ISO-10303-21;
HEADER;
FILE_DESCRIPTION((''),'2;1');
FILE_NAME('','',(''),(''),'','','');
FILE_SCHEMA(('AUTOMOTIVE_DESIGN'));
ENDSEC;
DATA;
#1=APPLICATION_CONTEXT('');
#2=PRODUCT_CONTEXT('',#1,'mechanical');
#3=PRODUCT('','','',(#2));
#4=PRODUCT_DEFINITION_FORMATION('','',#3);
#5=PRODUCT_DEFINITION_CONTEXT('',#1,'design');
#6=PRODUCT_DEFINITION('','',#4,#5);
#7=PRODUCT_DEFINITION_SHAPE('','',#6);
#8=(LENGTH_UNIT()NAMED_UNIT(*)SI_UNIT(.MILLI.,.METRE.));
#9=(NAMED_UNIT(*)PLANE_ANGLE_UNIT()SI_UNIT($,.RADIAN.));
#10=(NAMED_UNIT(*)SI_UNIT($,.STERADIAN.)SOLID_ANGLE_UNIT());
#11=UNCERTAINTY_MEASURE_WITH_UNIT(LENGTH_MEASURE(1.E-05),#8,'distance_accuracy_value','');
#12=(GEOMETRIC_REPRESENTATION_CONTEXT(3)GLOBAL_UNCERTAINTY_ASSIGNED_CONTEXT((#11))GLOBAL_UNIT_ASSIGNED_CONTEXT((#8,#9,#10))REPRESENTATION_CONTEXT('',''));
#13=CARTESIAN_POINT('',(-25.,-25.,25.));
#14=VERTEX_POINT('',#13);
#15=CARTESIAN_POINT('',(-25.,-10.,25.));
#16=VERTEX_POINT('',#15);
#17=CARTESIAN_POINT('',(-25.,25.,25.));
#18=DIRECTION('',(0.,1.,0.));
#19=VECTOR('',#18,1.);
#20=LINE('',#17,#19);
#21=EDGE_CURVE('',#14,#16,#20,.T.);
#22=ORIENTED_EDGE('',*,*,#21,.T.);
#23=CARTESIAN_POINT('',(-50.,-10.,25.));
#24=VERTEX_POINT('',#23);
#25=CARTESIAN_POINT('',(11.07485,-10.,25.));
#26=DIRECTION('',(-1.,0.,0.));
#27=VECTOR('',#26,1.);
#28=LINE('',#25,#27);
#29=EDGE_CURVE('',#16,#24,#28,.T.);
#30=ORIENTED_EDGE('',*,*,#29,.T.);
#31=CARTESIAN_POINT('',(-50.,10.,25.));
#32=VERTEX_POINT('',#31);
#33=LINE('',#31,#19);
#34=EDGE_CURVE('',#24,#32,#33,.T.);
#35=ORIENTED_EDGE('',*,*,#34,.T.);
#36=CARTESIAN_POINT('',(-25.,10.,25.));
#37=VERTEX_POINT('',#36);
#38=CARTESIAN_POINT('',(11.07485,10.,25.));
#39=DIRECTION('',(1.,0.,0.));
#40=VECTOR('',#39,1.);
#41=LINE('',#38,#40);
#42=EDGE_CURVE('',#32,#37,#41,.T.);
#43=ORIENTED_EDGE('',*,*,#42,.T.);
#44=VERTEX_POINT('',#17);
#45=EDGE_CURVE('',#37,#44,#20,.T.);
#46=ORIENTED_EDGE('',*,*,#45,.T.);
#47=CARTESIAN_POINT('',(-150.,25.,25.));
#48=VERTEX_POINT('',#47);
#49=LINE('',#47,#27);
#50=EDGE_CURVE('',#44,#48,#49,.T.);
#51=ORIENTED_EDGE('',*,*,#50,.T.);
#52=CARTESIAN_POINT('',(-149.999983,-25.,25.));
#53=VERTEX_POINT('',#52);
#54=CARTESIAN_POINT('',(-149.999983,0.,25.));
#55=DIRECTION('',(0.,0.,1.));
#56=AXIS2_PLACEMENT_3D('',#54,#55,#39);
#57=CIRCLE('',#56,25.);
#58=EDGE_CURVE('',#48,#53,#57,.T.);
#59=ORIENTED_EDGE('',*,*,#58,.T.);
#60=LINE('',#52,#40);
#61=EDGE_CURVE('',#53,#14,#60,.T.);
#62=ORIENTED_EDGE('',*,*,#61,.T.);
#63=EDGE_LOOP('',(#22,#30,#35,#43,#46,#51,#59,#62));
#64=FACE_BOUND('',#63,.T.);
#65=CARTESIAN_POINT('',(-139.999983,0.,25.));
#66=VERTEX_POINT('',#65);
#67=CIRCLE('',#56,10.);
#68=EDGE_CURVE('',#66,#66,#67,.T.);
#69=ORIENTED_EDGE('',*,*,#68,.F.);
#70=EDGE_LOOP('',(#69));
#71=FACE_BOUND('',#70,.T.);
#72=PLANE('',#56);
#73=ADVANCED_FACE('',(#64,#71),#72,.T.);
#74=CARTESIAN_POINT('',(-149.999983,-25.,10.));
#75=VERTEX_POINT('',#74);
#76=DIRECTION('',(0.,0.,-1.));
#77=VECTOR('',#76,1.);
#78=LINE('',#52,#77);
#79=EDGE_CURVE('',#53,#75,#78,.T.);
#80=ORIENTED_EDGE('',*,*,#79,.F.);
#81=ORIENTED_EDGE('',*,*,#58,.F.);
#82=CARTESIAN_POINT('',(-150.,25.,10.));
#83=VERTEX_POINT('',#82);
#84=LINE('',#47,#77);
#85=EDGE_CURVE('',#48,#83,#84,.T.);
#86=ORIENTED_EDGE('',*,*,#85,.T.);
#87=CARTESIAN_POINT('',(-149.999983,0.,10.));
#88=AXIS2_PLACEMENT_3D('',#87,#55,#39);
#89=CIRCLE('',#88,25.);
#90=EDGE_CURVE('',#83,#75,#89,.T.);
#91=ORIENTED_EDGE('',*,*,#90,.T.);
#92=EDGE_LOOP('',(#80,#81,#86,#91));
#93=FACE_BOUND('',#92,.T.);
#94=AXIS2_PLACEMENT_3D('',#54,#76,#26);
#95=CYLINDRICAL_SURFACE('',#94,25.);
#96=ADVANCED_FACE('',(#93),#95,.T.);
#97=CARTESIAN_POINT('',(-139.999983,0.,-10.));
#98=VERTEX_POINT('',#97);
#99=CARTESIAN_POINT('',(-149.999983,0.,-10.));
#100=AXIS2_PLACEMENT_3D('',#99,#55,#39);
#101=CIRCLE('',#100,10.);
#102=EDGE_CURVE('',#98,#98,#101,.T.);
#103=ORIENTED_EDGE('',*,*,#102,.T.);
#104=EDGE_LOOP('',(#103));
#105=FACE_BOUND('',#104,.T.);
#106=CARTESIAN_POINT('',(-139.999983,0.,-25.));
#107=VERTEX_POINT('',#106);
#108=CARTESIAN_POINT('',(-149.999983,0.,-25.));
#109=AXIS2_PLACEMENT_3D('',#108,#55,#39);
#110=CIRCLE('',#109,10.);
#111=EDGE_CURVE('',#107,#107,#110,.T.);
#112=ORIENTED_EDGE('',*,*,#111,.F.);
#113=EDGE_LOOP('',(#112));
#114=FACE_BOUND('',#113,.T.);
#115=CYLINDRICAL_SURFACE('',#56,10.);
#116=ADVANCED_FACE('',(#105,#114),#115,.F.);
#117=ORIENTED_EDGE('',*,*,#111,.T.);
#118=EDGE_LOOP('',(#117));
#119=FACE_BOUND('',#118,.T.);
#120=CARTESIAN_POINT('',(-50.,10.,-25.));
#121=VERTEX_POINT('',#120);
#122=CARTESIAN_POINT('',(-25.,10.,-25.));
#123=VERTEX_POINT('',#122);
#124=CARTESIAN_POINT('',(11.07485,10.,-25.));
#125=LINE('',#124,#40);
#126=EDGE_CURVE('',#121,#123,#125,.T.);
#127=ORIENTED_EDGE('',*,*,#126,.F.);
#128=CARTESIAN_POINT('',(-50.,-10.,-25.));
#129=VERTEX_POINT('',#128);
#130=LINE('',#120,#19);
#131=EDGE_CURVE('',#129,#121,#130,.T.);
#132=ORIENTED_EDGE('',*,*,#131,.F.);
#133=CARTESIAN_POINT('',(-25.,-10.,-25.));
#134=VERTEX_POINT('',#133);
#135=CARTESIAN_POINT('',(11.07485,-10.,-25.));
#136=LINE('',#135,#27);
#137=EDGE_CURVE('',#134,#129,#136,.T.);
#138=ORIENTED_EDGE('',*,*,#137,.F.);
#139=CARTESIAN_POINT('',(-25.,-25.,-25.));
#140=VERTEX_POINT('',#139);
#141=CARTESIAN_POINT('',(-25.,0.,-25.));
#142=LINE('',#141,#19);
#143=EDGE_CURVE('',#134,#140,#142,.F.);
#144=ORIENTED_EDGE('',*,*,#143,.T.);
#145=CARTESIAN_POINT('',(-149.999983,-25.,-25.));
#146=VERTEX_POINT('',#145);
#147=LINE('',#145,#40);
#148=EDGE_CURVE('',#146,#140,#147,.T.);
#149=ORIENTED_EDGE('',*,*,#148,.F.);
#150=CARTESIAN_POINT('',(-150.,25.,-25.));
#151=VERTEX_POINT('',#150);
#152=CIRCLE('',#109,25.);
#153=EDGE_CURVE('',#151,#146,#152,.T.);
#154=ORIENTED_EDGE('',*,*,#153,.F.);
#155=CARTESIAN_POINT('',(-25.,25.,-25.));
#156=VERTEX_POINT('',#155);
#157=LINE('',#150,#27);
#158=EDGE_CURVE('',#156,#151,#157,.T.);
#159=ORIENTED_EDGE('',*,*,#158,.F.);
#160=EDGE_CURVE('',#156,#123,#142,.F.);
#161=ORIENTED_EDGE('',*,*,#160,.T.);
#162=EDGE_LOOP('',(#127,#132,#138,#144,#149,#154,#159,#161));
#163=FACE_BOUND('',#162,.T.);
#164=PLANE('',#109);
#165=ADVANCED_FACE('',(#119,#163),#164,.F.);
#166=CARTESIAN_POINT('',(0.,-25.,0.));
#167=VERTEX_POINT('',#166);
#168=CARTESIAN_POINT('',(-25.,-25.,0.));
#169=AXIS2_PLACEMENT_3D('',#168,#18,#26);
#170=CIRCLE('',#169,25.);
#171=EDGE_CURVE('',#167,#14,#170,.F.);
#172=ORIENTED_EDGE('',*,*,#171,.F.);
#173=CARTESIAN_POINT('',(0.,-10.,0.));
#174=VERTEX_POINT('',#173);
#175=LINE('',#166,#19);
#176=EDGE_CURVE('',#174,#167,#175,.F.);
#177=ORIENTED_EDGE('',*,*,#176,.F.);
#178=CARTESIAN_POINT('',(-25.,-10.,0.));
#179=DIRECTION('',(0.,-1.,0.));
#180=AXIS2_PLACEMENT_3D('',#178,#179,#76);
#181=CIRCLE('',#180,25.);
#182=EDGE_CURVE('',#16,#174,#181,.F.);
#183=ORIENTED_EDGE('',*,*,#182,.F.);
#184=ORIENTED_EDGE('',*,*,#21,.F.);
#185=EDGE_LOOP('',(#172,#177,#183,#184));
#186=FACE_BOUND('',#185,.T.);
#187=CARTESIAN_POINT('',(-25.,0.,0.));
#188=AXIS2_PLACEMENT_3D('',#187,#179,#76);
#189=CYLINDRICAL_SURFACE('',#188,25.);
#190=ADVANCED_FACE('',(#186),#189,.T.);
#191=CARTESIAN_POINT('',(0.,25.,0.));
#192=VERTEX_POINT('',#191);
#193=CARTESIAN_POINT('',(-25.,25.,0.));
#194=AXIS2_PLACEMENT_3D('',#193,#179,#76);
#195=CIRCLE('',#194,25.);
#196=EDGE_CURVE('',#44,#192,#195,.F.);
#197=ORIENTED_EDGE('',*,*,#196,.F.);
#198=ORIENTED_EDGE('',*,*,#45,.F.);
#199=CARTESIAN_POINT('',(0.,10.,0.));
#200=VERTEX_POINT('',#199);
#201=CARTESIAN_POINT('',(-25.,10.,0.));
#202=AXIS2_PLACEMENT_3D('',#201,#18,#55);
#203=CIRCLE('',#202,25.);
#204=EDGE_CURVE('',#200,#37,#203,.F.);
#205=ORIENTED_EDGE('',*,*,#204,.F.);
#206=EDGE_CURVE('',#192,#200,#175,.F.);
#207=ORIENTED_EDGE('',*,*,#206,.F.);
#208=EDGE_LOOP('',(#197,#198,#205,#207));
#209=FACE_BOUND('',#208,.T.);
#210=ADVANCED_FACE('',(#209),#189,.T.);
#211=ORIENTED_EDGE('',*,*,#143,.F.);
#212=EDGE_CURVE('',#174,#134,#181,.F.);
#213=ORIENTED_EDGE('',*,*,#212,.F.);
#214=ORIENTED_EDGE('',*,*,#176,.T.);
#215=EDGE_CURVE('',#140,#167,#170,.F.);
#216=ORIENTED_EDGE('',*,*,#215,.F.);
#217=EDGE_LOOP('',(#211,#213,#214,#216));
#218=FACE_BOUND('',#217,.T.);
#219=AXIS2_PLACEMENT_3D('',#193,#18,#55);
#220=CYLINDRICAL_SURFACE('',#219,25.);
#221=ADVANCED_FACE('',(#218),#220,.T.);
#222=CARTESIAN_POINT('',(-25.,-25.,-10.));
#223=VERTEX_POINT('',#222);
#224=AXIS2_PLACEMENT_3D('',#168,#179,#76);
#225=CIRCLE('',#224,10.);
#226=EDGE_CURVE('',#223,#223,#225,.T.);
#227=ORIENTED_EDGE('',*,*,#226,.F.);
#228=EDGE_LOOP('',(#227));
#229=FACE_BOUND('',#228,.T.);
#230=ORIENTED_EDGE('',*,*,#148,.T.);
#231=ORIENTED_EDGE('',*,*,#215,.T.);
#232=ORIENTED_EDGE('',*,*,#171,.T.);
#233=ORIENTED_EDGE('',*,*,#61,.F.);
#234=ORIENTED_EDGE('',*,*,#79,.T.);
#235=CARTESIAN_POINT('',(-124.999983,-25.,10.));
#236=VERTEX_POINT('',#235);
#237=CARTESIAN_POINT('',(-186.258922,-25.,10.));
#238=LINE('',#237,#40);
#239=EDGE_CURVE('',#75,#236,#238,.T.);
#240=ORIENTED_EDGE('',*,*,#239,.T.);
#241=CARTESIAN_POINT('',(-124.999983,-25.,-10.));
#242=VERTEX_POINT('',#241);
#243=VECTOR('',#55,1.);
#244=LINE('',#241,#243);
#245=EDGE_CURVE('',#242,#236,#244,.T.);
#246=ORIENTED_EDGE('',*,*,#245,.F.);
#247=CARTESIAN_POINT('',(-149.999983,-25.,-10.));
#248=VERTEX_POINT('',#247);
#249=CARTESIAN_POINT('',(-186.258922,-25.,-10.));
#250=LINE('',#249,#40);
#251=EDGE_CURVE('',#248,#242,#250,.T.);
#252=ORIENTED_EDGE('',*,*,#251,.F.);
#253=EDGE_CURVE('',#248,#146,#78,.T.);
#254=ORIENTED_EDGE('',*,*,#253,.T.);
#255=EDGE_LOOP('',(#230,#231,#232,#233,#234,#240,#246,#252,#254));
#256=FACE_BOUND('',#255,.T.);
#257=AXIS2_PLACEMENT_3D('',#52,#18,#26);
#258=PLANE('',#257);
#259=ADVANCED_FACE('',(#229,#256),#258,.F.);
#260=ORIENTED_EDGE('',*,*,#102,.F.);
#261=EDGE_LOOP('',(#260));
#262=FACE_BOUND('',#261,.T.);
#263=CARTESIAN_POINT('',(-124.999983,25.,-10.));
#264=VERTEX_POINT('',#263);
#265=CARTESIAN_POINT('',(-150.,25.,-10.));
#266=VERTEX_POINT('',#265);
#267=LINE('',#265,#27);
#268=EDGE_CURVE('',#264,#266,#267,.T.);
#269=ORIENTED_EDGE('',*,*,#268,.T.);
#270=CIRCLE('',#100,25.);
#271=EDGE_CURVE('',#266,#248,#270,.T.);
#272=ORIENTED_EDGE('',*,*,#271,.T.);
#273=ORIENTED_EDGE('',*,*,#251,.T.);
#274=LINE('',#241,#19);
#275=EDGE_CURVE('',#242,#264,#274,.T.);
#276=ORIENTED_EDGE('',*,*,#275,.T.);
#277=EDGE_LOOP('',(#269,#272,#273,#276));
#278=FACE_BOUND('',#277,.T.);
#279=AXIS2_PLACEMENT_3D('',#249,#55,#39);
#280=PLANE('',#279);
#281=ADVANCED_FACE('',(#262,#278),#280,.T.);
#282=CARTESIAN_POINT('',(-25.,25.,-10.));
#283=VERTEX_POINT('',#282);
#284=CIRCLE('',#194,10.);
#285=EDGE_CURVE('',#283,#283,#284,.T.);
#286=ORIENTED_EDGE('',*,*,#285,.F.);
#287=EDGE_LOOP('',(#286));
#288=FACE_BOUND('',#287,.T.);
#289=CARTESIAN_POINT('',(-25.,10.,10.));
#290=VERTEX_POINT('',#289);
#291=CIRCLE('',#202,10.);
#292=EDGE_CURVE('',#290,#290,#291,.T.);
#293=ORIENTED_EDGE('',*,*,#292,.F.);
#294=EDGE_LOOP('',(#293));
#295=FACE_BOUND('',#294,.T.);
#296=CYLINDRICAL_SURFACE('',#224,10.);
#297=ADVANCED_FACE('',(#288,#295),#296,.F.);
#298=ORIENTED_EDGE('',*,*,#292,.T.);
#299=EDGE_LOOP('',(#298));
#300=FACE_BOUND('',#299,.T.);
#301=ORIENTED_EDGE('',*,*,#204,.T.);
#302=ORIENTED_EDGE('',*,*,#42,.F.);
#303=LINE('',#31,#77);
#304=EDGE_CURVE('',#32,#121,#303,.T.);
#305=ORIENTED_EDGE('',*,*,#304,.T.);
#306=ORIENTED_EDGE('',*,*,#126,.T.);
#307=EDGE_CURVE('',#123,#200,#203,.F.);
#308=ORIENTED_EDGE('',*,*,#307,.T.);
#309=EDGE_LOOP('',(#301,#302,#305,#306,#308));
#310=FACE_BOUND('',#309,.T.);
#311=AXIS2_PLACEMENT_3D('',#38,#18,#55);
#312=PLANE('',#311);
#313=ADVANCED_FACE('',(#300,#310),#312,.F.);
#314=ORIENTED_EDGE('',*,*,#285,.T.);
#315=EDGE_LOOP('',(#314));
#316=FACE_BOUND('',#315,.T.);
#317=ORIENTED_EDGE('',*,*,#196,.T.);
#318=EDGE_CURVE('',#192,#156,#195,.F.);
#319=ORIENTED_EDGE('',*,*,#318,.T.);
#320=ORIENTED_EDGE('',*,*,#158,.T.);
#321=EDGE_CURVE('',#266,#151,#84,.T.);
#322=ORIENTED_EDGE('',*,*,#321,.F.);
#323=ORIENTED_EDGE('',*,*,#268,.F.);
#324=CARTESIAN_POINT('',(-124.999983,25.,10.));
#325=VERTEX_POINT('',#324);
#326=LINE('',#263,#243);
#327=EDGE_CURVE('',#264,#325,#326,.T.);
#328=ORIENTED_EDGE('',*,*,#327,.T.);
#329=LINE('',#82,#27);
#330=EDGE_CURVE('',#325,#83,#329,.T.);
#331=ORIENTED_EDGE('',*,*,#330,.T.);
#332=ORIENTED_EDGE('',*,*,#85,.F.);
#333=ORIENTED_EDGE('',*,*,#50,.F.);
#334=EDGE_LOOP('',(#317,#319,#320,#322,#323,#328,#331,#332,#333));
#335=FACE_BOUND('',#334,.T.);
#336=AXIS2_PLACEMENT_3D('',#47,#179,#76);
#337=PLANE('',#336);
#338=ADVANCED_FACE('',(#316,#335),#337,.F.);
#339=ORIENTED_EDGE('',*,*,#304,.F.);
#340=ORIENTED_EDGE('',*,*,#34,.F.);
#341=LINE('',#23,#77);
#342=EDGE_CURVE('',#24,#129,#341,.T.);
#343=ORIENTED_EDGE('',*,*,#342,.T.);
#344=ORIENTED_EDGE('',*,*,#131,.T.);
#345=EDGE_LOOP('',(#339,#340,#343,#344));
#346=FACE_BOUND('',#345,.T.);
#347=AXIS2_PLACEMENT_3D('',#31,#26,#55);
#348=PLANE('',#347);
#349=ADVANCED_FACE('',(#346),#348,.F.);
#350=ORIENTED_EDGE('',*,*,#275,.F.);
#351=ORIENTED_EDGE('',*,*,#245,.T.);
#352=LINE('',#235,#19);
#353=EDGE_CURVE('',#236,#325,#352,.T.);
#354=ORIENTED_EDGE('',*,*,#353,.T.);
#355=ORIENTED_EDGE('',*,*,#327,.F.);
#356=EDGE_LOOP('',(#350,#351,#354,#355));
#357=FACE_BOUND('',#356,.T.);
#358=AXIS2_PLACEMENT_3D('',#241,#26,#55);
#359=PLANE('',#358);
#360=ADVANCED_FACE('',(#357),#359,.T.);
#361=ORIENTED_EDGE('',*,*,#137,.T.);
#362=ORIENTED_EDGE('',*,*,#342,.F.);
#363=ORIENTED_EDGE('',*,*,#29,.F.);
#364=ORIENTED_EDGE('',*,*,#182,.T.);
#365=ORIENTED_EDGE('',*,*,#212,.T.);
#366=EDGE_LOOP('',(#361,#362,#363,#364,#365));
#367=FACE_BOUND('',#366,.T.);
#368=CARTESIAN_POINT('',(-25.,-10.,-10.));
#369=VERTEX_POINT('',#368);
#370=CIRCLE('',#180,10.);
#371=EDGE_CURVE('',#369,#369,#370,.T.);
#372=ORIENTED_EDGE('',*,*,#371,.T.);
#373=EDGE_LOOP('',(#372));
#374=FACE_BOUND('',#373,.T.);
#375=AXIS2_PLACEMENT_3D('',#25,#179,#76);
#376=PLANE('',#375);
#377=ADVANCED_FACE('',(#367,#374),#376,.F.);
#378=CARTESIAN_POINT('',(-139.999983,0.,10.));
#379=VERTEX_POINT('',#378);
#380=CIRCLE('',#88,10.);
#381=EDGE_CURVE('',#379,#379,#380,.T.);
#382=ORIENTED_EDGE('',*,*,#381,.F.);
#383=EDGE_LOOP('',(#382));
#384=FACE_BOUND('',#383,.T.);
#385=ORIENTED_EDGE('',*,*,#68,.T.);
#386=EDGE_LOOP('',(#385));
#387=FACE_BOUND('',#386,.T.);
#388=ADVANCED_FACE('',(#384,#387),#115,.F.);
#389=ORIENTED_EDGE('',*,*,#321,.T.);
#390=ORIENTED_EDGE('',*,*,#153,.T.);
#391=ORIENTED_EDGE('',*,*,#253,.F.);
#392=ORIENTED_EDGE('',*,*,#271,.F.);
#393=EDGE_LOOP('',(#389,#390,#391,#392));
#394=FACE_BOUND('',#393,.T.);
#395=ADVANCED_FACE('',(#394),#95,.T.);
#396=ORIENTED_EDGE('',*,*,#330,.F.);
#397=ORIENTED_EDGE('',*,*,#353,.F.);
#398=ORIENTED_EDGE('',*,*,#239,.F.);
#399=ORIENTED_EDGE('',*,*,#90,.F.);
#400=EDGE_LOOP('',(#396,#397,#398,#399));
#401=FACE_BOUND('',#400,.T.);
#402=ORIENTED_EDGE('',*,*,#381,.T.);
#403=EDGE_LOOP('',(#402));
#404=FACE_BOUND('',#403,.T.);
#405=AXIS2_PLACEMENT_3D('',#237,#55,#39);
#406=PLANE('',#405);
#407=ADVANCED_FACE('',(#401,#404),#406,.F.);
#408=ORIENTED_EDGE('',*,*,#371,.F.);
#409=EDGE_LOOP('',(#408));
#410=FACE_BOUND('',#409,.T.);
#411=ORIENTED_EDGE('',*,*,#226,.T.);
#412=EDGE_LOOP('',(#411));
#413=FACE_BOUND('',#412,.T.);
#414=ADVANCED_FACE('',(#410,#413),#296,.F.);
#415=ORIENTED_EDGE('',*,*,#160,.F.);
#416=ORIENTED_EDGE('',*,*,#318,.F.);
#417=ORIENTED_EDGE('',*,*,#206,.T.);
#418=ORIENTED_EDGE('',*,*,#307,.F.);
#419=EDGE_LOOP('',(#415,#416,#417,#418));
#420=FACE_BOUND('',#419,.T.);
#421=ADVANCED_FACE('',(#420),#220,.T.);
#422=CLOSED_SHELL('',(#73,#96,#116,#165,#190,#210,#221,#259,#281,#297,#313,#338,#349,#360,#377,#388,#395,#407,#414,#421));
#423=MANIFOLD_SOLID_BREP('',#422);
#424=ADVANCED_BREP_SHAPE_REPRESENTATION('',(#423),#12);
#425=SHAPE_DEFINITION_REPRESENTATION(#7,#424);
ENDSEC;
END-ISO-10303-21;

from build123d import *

# Parameters (mm, degrees)
BOSS_EXTRUDE1_DEPTH              = 25
FILLET1_R                        = 25
SKETCH4_W                        = 61.258938573
SKETCH4_H                        = 20
CUT_EXTRUDE1_DEPTH               = 50
SKETCH5_W                        = 61.074850192
SKETCH5_H                        = 20
CUT_EXTRUDE2_DEPTH               = 50
F_20_0MM_DOWEL_HOLE1_D           = 20
F_20_0MM_DOWEL_HOLE1_ON_FACE_2_D = 20


with BuildPart() as part:
    # Sketch1 → Boss-Extrude1 (new, symmetric)
    with BuildSketch(Plane.XY):
        with BuildLine():
            Line((-150, 25), (0, 25))
            Line((0, 25), (0, -25))
            Line((0, -25), (-149.999982985, -25))
            ThreePointArc((-149.999982985, -25), (-174.999982985, -8.507e-06), (-150, 25))
        make_face()
    extrude(amount=BOSS_EXTRUDE1_DEPTH, both=True)

    # Fillet1
    fillet1_edges = [part.edges().sort_by_distance(p)[0] for p in [
        (0, 0, -25),
        (0, 0, 25),
    ]]
    fillet(fillet1_edges, radius=FILLET1_R - 0.0001)  # a hair under: the kernel refuses the full size

    # Sketch4 → Cut-Extrude1 (cut)
    with BuildSketch(Plane(origin=(0, 25, 0), x_dir=(1, 0, 0), z_dir=(0, 1, 0))):
        with Locations((-155.629452272, 0)):
            Rectangle(SKETCH4_W, SKETCH4_H)
    extrude(amount=-CUT_EXTRUDE1_DEPTH, mode=Mode.SUBTRACT)

    # Sketch5 → Cut-Extrude2 (cut)
    with BuildSketch(Plane(origin=(0, 0, -25), x_dir=(-1, 0, 0), z_dir=(0, 0, -1))):
        with Locations((19.462574904, 0)):
            Rectangle(SKETCH5_W, SKETCH5_H)
    extrude(amount=-CUT_EXTRUDE2_DEPTH, mode=Mode.SUBTRACT)

    # Ø20.0mm Dowel Hole1 (through all)
    with Locations(Plane(origin=(-149.999982985, 0, 25), x_dir=(1, 0, 0), z_dir=(0, 0, 1))):
        with Locations((0, 0)):
            Hole(F_20_0MM_DOWEL_HOLE1_D / 2)

    # Ø20.0mm Dowel Hole1 on face 2 (through all)
    with Locations(Plane(origin=(-25, -25, 0), x_dir=(0, 0, -1), z_dir=(0, -1, 0))):
        with Locations((0, 0)):
            Hole(F_20_0MM_DOWEL_HOLE1_ON_FACE_2_D / 2)


solid = part.part
